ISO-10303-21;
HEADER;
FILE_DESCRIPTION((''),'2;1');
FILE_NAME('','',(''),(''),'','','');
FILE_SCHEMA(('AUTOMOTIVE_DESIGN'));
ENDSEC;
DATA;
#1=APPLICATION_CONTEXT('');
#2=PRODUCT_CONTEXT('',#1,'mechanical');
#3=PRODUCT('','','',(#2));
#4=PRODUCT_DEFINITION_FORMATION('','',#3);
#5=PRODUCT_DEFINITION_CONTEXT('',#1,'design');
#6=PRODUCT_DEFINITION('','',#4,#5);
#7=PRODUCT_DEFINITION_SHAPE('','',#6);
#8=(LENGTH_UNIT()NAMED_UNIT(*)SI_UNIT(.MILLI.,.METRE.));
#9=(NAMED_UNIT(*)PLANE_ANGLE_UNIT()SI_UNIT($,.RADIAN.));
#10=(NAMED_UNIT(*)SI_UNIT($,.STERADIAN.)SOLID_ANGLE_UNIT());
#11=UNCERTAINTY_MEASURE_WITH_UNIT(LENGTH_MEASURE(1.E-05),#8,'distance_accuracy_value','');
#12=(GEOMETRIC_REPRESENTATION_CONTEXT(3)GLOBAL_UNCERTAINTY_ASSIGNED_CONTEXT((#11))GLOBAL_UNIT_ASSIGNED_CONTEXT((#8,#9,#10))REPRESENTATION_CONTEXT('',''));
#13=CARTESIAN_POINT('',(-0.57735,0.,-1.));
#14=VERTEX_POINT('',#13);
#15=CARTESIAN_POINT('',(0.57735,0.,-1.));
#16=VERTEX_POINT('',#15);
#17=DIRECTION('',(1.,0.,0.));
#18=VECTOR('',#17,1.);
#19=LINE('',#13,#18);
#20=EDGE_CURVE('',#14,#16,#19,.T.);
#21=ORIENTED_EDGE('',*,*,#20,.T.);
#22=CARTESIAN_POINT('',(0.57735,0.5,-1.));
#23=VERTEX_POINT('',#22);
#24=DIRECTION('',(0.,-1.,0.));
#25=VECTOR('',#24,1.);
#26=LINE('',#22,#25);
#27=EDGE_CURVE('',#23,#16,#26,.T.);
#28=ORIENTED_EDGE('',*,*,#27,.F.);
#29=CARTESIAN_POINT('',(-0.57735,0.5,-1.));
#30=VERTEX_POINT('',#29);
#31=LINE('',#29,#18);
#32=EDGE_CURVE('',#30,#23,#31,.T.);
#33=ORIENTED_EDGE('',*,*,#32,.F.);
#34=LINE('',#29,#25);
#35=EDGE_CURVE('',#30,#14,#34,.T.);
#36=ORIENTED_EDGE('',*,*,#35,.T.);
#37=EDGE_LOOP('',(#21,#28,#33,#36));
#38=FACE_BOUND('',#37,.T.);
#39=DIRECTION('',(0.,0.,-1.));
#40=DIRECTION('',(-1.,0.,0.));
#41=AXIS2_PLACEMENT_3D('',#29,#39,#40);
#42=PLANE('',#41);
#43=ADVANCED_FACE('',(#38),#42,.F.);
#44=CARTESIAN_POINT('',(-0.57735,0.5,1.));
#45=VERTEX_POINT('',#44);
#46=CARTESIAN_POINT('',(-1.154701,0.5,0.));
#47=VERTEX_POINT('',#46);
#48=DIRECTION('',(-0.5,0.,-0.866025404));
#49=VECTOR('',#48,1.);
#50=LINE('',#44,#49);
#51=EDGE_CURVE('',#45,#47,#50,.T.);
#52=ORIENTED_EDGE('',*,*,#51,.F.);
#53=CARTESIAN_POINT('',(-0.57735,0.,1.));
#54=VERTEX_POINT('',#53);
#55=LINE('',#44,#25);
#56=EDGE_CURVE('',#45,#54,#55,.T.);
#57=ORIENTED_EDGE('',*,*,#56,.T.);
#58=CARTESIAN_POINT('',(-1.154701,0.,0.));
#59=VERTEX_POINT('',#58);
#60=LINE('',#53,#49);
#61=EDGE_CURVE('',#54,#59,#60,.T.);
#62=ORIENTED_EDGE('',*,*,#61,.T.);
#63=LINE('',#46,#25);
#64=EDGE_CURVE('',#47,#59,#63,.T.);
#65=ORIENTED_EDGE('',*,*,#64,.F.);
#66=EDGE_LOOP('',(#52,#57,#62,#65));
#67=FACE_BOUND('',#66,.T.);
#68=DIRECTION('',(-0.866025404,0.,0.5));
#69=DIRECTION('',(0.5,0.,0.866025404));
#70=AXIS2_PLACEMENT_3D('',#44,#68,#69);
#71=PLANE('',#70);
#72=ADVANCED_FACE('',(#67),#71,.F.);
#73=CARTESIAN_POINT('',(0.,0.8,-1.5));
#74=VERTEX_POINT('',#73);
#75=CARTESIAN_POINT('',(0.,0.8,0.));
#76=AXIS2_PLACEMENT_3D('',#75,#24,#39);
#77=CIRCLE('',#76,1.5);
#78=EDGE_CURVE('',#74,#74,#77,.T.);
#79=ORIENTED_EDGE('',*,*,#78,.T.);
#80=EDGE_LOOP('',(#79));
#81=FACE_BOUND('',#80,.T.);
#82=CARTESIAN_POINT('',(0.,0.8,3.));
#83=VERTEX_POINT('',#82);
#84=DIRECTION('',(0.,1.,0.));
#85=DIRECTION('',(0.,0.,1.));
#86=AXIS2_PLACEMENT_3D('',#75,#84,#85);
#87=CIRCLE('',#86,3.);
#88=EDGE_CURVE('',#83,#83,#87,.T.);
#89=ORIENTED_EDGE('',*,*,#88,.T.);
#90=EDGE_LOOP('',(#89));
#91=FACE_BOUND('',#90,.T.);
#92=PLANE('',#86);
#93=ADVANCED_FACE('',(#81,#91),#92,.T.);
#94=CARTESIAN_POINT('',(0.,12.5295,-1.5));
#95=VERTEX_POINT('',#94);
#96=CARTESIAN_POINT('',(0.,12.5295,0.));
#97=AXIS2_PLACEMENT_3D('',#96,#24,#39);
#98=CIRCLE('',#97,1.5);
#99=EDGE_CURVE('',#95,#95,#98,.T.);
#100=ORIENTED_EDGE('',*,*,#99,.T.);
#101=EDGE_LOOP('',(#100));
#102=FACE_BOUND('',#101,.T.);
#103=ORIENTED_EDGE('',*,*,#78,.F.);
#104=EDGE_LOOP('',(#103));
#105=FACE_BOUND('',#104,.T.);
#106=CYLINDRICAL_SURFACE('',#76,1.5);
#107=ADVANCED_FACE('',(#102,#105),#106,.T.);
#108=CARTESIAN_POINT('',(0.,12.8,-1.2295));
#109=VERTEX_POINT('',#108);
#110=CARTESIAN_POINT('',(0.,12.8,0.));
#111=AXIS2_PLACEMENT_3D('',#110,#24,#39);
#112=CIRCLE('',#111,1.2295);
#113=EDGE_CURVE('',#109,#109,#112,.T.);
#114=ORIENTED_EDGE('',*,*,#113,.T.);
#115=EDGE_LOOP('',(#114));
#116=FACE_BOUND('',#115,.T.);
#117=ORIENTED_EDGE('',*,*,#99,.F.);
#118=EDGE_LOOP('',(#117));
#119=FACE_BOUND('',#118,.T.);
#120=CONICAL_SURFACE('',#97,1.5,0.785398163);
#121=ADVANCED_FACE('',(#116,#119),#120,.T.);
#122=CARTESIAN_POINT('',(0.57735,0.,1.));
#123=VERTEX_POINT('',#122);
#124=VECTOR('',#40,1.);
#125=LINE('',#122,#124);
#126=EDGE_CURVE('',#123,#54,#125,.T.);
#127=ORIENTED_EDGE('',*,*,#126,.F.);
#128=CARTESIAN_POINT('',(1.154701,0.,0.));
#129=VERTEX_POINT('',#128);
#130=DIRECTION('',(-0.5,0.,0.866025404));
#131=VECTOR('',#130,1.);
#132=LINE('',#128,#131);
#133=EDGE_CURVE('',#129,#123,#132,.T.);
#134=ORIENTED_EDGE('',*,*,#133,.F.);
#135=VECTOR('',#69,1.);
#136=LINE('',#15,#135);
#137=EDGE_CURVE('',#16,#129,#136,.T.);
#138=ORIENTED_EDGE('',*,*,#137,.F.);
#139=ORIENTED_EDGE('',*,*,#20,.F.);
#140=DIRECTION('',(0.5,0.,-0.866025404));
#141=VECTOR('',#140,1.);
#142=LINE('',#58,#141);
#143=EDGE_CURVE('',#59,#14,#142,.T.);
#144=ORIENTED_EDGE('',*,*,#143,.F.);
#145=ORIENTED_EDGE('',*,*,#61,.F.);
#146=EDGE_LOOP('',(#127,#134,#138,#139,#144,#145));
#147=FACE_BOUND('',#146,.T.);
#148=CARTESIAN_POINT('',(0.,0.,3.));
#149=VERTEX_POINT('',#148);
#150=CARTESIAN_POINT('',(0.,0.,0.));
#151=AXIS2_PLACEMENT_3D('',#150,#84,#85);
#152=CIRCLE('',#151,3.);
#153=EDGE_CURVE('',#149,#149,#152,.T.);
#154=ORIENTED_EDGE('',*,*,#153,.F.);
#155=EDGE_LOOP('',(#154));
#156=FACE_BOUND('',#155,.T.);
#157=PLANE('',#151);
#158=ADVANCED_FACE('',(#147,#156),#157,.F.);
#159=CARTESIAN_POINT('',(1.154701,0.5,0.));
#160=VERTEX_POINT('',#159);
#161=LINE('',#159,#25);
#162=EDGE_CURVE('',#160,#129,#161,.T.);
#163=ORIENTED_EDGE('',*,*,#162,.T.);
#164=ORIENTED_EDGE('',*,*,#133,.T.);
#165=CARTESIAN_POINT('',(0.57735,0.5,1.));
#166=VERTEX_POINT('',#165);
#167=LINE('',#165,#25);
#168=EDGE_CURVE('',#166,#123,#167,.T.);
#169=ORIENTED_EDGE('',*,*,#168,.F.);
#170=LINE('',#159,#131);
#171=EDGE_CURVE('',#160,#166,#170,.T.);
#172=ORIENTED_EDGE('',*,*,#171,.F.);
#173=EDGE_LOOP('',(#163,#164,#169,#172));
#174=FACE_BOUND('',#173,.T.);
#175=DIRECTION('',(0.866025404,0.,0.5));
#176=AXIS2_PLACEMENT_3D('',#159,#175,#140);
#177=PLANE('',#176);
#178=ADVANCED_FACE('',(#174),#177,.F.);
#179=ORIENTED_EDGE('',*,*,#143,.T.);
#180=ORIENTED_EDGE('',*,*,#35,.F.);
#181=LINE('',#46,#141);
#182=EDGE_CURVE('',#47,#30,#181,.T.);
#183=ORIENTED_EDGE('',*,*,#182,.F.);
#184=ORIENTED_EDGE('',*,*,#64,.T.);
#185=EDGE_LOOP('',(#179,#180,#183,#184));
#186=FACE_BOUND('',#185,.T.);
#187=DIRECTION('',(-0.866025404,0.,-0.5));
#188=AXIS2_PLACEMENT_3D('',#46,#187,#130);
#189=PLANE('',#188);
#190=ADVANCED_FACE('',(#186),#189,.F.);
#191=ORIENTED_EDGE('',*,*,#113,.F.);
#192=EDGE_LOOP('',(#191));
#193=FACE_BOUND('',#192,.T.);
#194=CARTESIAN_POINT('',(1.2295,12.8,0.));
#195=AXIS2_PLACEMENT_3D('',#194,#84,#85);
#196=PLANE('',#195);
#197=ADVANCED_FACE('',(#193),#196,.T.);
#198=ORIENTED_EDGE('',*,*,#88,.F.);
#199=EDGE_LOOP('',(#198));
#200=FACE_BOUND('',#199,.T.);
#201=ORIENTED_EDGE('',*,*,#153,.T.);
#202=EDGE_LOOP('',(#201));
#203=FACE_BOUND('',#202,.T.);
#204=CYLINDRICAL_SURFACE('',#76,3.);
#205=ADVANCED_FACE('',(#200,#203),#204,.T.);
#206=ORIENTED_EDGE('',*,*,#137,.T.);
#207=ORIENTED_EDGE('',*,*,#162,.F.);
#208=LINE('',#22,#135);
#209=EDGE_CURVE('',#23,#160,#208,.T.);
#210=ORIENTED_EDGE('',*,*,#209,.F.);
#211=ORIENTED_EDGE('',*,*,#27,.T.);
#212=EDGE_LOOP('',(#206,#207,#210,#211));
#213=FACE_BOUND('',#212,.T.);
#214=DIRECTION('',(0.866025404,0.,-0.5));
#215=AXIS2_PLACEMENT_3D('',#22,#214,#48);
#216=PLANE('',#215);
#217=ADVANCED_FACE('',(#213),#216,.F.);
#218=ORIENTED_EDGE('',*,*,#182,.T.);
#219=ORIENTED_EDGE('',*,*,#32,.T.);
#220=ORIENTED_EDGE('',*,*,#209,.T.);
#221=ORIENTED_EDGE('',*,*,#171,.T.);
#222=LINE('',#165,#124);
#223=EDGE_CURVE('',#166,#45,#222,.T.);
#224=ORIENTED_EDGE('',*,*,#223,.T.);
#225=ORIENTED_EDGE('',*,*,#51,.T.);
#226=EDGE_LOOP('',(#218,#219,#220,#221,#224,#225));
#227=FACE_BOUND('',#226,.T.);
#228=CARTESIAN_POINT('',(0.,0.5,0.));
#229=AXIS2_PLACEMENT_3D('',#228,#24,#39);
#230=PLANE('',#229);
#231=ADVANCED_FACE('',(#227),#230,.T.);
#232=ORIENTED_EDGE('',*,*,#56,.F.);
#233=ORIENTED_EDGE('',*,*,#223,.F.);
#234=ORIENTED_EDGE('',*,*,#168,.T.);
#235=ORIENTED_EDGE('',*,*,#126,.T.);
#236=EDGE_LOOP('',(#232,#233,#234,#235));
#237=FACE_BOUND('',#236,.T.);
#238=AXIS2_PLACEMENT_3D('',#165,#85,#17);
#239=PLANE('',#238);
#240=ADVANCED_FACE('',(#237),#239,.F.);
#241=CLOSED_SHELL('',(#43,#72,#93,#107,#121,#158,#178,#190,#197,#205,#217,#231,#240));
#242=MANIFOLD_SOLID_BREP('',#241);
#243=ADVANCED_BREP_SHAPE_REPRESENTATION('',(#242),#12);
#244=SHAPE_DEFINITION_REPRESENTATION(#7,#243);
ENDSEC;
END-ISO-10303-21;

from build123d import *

# Parameters (mm, degrees)
SKETCH_1_R          = 3
EXTRUDE_1_DEPTH     = 0.8
CUT_EXTRUDE_1_DEPTH = 0.5


# Read off the part's stored shape, not the designer's step: M3 机械螺纹 螺柱3
with BuildPart() as part:
    # 草图1 → 凸台-拉伸1 (new body)
    with BuildSketch(Plane(origin=(0, 0, 0), x_dir=(1, 0, 0), z_dir=(0, 1, 0))):
        with Locations(Location((0, 0, 0), (0, 0, 270))):
            Circle(SKETCH_1_R)
    extrude(amount=EXTRUDE_1_DEPTH)

    # M3 机械螺纹 螺柱3 outline → M3 机械螺纹 螺柱3 (revolve)
    with BuildSketch(Plane.XY):
        Polygon((1.2295, 12.8), (0, 12.8), (0, 0.8), (1.5, 0.8), (1.5, 12.5295), align=None)
    revolve(axis=Axis((0, 0, 0), (0, 1, 0)))

    # 草图8 → 切除-拉伸1 (cut)
    with BuildSketch(Plane.XZ):
        Polygon((1.154700538, 0), (0.577350269, 1), (-0.577350269, 1), (-1.154700538, 0), (-0.577350269, -1), (0.577350269, -1), align=None)
    extrude(amount=-CUT_EXTRUDE_1_DEPTH, mode=Mode.SUBTRACT)


solid = part.part
